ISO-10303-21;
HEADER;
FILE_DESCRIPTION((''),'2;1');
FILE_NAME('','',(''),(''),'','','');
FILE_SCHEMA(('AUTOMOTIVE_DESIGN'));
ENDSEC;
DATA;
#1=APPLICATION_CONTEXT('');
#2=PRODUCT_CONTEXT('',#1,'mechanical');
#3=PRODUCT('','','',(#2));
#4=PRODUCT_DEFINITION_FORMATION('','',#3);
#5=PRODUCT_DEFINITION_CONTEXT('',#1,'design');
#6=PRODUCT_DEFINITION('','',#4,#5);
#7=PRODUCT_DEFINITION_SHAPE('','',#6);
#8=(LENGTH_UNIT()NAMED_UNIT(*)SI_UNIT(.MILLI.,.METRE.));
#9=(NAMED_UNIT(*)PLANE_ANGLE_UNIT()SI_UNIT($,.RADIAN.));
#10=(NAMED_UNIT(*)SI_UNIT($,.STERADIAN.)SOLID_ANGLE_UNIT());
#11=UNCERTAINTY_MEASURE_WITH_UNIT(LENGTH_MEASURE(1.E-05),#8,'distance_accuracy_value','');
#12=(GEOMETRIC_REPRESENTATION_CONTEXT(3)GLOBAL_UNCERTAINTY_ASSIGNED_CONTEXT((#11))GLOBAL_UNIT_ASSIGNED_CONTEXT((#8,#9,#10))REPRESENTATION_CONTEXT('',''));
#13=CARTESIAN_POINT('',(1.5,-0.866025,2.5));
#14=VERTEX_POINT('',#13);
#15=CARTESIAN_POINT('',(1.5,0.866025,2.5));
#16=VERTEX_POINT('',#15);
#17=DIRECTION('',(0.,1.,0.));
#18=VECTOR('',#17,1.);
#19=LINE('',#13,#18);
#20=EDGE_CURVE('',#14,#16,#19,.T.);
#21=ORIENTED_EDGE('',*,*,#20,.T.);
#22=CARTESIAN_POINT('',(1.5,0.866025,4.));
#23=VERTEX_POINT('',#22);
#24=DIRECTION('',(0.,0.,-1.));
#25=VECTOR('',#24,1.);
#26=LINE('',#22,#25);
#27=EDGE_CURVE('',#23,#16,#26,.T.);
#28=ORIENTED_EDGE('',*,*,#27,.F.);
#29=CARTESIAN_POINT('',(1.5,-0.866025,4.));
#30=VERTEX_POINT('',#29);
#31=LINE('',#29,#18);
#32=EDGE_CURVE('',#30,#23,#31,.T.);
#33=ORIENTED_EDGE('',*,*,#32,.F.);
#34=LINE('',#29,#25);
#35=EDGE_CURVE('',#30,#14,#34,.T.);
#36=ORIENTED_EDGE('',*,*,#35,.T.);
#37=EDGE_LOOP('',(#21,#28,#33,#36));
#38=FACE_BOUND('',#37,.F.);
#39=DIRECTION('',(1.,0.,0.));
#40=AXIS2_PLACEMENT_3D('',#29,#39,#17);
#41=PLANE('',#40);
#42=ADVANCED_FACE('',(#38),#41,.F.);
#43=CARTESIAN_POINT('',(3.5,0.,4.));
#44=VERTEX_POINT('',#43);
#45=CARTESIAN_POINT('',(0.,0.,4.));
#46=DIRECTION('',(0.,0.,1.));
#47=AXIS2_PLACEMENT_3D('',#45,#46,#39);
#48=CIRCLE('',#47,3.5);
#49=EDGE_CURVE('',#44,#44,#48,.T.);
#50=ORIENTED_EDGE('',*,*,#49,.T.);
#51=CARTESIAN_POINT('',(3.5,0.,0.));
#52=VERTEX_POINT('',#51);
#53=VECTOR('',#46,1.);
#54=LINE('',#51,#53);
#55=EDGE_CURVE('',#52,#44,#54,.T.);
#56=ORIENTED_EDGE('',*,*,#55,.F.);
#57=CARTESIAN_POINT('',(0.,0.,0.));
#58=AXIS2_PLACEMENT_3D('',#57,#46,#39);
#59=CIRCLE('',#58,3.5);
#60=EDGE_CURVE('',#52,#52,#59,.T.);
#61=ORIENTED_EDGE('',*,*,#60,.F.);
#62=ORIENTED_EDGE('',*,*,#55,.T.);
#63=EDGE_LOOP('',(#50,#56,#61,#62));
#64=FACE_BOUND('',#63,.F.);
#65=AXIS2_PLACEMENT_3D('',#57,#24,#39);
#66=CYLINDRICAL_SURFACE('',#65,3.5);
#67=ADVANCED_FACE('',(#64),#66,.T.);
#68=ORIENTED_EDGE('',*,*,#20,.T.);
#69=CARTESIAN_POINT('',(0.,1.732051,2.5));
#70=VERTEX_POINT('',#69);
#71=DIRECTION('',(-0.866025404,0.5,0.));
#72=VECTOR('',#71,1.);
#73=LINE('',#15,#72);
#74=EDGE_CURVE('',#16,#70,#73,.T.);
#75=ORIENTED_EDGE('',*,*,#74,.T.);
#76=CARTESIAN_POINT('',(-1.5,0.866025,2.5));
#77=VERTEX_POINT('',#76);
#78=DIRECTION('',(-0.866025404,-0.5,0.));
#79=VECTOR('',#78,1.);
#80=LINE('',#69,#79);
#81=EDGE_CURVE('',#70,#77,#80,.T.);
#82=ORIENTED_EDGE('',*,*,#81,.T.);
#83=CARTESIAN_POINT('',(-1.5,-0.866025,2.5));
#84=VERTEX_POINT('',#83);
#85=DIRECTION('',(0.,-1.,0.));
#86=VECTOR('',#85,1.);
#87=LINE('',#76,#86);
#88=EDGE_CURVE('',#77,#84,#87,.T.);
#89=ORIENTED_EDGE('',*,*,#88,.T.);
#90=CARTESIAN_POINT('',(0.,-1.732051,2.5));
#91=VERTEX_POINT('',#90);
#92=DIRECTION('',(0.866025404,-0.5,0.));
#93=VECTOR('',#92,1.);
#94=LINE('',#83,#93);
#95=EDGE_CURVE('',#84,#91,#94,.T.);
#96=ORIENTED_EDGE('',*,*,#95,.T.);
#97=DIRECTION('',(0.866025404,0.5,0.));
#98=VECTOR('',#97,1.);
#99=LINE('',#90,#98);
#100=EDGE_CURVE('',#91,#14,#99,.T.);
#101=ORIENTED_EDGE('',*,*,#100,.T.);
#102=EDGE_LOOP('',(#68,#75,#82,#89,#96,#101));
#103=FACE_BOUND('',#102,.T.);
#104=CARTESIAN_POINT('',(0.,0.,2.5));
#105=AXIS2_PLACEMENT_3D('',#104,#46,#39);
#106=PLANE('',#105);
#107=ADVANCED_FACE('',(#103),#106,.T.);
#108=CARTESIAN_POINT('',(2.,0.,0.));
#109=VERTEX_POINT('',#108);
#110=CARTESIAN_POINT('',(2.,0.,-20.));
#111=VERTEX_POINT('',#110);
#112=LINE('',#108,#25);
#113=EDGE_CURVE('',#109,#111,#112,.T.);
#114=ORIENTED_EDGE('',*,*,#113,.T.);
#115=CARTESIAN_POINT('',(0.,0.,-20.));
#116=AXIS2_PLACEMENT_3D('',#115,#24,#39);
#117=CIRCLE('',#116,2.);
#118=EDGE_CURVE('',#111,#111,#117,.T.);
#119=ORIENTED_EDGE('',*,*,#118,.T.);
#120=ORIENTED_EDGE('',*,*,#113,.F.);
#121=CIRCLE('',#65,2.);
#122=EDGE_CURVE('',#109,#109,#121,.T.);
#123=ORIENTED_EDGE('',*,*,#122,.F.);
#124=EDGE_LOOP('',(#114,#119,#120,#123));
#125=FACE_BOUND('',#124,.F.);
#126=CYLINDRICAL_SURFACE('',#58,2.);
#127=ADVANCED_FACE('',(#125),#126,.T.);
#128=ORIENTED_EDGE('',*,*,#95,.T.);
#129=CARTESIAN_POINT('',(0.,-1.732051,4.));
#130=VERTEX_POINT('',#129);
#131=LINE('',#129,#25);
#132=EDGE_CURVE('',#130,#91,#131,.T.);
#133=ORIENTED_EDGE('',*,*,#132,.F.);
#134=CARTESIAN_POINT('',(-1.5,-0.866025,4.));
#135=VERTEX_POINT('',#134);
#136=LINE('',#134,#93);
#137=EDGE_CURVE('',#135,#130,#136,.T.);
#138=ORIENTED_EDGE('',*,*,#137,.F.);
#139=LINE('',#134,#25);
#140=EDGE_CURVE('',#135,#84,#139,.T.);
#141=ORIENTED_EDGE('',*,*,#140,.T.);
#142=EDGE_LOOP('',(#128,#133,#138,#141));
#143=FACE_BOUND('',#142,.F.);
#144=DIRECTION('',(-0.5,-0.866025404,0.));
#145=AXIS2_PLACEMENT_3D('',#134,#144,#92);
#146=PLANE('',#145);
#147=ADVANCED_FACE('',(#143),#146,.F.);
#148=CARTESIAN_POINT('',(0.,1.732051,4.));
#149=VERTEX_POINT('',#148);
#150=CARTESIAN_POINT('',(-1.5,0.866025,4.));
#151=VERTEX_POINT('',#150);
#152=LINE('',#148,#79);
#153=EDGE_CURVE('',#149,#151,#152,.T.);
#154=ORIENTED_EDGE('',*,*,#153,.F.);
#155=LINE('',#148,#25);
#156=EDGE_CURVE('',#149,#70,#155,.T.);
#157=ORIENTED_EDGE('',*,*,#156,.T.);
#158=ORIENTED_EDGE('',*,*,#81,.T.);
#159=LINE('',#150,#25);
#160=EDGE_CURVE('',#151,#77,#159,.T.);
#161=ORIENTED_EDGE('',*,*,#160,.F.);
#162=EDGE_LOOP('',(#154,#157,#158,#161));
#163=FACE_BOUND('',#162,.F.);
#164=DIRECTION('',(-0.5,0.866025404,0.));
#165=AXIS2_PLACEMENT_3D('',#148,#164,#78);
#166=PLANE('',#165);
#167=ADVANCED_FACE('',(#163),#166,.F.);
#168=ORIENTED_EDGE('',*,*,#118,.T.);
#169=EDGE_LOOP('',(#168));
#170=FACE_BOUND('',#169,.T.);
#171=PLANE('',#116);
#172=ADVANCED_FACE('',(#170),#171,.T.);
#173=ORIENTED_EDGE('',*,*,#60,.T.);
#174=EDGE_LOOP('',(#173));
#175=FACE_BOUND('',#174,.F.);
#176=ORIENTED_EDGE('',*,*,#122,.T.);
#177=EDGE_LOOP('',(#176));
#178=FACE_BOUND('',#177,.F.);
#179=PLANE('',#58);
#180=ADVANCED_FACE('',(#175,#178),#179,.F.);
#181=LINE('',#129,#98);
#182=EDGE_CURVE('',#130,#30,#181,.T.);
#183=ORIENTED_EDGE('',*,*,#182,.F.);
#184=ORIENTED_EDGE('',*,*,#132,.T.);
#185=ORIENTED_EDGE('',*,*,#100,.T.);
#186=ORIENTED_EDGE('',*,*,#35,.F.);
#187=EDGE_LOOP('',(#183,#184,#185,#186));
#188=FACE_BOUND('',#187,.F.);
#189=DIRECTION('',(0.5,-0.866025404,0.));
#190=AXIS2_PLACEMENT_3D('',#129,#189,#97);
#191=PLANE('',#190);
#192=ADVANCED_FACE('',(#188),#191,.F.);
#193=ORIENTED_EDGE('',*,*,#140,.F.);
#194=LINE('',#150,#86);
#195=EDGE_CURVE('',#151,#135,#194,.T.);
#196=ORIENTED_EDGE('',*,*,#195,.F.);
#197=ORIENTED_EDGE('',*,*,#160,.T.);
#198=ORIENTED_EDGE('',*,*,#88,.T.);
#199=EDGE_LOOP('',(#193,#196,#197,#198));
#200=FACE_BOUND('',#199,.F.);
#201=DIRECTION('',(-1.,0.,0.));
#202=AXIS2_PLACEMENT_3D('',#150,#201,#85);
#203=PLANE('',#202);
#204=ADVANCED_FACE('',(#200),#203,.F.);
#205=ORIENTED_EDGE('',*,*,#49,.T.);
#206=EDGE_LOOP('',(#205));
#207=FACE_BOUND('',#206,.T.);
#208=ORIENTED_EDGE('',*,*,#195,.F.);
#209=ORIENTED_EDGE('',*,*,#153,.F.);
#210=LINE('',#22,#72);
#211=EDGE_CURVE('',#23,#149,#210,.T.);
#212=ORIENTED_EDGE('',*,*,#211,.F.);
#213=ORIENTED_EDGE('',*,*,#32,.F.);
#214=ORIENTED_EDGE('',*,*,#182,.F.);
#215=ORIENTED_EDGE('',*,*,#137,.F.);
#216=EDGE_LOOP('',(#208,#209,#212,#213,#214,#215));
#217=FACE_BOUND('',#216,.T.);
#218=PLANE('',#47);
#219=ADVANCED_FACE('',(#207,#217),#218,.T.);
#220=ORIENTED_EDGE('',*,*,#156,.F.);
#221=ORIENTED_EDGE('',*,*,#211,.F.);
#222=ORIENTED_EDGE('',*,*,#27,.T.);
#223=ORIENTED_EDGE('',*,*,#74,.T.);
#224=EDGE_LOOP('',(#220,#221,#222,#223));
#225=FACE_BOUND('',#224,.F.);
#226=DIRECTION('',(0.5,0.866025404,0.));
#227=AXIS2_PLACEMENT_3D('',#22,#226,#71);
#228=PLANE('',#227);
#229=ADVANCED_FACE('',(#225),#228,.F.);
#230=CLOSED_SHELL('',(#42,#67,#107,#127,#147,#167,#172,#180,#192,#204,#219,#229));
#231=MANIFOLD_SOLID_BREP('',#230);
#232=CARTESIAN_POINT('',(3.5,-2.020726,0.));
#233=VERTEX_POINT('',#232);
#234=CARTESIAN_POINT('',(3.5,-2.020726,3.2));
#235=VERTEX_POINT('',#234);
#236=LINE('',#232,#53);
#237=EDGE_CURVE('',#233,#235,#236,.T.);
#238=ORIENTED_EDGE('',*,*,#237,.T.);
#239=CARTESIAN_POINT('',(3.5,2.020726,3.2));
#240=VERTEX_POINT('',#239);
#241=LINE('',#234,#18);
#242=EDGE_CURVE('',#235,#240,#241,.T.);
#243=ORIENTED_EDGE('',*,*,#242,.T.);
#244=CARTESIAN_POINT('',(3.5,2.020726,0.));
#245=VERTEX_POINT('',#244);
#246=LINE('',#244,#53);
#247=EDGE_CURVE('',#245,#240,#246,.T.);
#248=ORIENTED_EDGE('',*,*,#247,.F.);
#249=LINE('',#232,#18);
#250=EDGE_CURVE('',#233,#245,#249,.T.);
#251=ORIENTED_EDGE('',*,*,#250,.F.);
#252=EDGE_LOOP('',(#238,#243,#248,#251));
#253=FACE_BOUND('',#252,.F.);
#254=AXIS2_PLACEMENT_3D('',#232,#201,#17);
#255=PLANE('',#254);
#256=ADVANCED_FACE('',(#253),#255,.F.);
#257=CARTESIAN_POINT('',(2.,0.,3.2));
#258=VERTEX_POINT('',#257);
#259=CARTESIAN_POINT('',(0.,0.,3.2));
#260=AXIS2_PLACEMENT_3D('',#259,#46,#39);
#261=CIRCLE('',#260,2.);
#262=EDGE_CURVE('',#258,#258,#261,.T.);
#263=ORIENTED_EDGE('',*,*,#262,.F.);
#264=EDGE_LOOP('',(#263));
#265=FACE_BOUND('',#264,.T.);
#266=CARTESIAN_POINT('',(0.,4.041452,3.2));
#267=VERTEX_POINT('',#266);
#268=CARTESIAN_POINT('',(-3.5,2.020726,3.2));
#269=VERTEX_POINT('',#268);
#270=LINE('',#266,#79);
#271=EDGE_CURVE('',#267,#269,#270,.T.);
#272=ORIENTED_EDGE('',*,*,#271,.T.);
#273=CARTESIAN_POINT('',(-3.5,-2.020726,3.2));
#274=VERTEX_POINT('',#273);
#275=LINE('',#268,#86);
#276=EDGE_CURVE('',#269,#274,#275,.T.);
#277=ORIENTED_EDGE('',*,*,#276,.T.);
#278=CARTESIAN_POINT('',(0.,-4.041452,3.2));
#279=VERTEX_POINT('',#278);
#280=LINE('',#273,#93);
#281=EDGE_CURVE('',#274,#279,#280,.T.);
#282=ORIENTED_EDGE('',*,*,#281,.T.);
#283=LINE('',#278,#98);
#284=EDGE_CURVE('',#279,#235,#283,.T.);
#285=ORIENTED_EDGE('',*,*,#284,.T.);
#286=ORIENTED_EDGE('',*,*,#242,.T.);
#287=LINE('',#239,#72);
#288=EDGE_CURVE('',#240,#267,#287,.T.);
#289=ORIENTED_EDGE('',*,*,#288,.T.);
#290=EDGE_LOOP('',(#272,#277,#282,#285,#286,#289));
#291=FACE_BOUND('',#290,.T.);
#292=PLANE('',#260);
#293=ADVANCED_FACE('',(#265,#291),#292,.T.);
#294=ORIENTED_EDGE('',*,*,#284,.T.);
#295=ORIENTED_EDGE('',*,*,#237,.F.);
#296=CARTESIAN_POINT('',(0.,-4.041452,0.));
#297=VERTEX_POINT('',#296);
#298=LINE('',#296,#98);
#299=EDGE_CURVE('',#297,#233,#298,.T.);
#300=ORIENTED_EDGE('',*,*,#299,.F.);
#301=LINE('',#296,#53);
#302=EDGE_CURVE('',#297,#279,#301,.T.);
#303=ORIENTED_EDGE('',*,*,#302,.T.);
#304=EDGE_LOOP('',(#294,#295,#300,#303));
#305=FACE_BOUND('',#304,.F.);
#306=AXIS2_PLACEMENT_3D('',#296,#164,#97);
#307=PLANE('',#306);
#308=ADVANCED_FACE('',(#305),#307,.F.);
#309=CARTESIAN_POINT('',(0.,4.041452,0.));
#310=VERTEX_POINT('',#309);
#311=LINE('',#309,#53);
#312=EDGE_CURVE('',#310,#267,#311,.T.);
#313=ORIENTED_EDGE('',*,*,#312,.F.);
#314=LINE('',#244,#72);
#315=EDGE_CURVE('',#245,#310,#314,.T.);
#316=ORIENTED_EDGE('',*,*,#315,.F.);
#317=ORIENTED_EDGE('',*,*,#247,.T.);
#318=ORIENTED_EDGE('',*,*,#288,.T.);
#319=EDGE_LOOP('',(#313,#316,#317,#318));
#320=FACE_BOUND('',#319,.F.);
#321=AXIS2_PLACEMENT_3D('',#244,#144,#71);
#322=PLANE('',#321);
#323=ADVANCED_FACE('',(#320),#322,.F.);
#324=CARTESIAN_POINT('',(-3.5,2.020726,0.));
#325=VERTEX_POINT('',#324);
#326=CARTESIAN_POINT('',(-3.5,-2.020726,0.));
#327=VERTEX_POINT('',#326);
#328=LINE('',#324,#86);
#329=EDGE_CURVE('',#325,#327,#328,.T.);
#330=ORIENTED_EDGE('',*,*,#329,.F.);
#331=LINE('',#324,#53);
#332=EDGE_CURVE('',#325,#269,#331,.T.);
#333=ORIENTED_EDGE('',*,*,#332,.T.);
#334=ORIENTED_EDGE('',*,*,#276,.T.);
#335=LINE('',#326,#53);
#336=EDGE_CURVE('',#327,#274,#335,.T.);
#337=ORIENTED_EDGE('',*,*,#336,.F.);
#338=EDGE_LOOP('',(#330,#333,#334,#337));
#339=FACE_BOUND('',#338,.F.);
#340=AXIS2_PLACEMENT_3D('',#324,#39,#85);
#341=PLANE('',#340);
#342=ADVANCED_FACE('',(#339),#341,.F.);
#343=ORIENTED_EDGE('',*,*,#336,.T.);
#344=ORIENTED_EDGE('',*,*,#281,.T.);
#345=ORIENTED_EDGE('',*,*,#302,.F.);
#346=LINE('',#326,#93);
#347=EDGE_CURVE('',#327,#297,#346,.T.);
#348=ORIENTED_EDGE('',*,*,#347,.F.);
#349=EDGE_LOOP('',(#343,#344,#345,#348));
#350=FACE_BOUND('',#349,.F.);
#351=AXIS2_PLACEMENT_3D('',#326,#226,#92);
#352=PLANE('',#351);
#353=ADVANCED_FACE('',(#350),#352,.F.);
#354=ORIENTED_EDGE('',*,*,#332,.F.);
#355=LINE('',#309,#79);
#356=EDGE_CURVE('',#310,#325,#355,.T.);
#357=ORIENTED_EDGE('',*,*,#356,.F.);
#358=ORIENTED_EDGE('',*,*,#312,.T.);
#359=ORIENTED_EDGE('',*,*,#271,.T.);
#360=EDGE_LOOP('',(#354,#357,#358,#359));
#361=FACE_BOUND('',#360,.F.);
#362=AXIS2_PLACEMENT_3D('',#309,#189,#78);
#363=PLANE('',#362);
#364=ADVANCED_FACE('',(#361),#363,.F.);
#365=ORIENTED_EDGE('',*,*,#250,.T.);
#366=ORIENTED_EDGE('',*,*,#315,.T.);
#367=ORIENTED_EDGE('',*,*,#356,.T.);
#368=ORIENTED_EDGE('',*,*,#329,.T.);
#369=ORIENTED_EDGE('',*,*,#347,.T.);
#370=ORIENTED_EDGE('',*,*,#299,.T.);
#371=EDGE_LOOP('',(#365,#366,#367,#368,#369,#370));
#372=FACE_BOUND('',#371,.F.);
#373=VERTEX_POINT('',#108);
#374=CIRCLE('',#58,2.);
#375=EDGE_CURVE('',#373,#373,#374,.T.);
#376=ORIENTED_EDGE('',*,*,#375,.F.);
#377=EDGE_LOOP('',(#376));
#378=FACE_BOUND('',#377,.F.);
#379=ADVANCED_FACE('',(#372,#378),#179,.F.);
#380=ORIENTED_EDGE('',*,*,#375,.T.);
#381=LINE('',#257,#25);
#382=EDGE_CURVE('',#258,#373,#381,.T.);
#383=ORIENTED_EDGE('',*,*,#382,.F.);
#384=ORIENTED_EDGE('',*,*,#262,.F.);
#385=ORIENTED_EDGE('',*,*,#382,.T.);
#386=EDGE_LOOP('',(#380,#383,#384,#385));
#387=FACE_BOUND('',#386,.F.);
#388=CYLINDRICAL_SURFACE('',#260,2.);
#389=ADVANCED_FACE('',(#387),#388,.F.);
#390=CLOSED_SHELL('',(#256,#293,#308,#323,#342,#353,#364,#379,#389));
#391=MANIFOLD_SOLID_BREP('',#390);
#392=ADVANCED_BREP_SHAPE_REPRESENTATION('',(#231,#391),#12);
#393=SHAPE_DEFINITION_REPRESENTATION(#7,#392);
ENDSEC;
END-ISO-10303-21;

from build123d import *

# Parameters (mm, degrees)
F0_R     = 3.5
F1_DEPTH = 4
F3_DEPTH = 1.5
F4_R     = 2
F5_DEPTH = 20
F7_DEPTH = 3.2
F8_R     = 2
F9_DEPTH = 25


with BuildPart() as f1:
    # F0 (on Top) → F1 (new body)
    with BuildSketch(Plane.XY):
        Circle(F0_R)
    extrude(amount=F1_DEPTH)

    # F2 (on face) → F3 (cut)
    with BuildSketch(Plane.XY.offset(4)):
        Polygon((1.5, 0.8660254038), (0, 1.7320508076), (-1.5, 0.8660254038), (-1.5, -0.8660254038), (0, -1.7320508076), (1.5, -0.8660254038), align=None)
    extrude(amount=-F3_DEPTH, mode=Mode.SUBTRACT)

    # F4 (on face) → F5 (join)
    with BuildSketch(Plane(origin=(0, 0, 0), x_dir=(1, 0, 0), z_dir=(0, 0, -1))):
        Circle(F4_R)
    extrude(amount=F5_DEPTH)


with BuildPart() as f7:
    # F6 (on Top) → F7 (new body)
    with BuildSketch(Plane.XY):
        Polygon((3.5, 2.0207259422), (0, 4.0414518843), (-3.5, 2.0207259422), (-3.5, -2.0207259422), (0, -4.0414518843), (3.5, -2.0207259422), align=None)
    extrude(amount=F7_DEPTH)

    # F8 (on face) → F9 (cut)
    with BuildSketch(Plane.XY.offset(3.2)):
        Circle(F8_R)
    extrude(amount=-F9_DEPTH, mode=Mode.SUBTRACT)


solid = Compound([f1.part, f7.part])
